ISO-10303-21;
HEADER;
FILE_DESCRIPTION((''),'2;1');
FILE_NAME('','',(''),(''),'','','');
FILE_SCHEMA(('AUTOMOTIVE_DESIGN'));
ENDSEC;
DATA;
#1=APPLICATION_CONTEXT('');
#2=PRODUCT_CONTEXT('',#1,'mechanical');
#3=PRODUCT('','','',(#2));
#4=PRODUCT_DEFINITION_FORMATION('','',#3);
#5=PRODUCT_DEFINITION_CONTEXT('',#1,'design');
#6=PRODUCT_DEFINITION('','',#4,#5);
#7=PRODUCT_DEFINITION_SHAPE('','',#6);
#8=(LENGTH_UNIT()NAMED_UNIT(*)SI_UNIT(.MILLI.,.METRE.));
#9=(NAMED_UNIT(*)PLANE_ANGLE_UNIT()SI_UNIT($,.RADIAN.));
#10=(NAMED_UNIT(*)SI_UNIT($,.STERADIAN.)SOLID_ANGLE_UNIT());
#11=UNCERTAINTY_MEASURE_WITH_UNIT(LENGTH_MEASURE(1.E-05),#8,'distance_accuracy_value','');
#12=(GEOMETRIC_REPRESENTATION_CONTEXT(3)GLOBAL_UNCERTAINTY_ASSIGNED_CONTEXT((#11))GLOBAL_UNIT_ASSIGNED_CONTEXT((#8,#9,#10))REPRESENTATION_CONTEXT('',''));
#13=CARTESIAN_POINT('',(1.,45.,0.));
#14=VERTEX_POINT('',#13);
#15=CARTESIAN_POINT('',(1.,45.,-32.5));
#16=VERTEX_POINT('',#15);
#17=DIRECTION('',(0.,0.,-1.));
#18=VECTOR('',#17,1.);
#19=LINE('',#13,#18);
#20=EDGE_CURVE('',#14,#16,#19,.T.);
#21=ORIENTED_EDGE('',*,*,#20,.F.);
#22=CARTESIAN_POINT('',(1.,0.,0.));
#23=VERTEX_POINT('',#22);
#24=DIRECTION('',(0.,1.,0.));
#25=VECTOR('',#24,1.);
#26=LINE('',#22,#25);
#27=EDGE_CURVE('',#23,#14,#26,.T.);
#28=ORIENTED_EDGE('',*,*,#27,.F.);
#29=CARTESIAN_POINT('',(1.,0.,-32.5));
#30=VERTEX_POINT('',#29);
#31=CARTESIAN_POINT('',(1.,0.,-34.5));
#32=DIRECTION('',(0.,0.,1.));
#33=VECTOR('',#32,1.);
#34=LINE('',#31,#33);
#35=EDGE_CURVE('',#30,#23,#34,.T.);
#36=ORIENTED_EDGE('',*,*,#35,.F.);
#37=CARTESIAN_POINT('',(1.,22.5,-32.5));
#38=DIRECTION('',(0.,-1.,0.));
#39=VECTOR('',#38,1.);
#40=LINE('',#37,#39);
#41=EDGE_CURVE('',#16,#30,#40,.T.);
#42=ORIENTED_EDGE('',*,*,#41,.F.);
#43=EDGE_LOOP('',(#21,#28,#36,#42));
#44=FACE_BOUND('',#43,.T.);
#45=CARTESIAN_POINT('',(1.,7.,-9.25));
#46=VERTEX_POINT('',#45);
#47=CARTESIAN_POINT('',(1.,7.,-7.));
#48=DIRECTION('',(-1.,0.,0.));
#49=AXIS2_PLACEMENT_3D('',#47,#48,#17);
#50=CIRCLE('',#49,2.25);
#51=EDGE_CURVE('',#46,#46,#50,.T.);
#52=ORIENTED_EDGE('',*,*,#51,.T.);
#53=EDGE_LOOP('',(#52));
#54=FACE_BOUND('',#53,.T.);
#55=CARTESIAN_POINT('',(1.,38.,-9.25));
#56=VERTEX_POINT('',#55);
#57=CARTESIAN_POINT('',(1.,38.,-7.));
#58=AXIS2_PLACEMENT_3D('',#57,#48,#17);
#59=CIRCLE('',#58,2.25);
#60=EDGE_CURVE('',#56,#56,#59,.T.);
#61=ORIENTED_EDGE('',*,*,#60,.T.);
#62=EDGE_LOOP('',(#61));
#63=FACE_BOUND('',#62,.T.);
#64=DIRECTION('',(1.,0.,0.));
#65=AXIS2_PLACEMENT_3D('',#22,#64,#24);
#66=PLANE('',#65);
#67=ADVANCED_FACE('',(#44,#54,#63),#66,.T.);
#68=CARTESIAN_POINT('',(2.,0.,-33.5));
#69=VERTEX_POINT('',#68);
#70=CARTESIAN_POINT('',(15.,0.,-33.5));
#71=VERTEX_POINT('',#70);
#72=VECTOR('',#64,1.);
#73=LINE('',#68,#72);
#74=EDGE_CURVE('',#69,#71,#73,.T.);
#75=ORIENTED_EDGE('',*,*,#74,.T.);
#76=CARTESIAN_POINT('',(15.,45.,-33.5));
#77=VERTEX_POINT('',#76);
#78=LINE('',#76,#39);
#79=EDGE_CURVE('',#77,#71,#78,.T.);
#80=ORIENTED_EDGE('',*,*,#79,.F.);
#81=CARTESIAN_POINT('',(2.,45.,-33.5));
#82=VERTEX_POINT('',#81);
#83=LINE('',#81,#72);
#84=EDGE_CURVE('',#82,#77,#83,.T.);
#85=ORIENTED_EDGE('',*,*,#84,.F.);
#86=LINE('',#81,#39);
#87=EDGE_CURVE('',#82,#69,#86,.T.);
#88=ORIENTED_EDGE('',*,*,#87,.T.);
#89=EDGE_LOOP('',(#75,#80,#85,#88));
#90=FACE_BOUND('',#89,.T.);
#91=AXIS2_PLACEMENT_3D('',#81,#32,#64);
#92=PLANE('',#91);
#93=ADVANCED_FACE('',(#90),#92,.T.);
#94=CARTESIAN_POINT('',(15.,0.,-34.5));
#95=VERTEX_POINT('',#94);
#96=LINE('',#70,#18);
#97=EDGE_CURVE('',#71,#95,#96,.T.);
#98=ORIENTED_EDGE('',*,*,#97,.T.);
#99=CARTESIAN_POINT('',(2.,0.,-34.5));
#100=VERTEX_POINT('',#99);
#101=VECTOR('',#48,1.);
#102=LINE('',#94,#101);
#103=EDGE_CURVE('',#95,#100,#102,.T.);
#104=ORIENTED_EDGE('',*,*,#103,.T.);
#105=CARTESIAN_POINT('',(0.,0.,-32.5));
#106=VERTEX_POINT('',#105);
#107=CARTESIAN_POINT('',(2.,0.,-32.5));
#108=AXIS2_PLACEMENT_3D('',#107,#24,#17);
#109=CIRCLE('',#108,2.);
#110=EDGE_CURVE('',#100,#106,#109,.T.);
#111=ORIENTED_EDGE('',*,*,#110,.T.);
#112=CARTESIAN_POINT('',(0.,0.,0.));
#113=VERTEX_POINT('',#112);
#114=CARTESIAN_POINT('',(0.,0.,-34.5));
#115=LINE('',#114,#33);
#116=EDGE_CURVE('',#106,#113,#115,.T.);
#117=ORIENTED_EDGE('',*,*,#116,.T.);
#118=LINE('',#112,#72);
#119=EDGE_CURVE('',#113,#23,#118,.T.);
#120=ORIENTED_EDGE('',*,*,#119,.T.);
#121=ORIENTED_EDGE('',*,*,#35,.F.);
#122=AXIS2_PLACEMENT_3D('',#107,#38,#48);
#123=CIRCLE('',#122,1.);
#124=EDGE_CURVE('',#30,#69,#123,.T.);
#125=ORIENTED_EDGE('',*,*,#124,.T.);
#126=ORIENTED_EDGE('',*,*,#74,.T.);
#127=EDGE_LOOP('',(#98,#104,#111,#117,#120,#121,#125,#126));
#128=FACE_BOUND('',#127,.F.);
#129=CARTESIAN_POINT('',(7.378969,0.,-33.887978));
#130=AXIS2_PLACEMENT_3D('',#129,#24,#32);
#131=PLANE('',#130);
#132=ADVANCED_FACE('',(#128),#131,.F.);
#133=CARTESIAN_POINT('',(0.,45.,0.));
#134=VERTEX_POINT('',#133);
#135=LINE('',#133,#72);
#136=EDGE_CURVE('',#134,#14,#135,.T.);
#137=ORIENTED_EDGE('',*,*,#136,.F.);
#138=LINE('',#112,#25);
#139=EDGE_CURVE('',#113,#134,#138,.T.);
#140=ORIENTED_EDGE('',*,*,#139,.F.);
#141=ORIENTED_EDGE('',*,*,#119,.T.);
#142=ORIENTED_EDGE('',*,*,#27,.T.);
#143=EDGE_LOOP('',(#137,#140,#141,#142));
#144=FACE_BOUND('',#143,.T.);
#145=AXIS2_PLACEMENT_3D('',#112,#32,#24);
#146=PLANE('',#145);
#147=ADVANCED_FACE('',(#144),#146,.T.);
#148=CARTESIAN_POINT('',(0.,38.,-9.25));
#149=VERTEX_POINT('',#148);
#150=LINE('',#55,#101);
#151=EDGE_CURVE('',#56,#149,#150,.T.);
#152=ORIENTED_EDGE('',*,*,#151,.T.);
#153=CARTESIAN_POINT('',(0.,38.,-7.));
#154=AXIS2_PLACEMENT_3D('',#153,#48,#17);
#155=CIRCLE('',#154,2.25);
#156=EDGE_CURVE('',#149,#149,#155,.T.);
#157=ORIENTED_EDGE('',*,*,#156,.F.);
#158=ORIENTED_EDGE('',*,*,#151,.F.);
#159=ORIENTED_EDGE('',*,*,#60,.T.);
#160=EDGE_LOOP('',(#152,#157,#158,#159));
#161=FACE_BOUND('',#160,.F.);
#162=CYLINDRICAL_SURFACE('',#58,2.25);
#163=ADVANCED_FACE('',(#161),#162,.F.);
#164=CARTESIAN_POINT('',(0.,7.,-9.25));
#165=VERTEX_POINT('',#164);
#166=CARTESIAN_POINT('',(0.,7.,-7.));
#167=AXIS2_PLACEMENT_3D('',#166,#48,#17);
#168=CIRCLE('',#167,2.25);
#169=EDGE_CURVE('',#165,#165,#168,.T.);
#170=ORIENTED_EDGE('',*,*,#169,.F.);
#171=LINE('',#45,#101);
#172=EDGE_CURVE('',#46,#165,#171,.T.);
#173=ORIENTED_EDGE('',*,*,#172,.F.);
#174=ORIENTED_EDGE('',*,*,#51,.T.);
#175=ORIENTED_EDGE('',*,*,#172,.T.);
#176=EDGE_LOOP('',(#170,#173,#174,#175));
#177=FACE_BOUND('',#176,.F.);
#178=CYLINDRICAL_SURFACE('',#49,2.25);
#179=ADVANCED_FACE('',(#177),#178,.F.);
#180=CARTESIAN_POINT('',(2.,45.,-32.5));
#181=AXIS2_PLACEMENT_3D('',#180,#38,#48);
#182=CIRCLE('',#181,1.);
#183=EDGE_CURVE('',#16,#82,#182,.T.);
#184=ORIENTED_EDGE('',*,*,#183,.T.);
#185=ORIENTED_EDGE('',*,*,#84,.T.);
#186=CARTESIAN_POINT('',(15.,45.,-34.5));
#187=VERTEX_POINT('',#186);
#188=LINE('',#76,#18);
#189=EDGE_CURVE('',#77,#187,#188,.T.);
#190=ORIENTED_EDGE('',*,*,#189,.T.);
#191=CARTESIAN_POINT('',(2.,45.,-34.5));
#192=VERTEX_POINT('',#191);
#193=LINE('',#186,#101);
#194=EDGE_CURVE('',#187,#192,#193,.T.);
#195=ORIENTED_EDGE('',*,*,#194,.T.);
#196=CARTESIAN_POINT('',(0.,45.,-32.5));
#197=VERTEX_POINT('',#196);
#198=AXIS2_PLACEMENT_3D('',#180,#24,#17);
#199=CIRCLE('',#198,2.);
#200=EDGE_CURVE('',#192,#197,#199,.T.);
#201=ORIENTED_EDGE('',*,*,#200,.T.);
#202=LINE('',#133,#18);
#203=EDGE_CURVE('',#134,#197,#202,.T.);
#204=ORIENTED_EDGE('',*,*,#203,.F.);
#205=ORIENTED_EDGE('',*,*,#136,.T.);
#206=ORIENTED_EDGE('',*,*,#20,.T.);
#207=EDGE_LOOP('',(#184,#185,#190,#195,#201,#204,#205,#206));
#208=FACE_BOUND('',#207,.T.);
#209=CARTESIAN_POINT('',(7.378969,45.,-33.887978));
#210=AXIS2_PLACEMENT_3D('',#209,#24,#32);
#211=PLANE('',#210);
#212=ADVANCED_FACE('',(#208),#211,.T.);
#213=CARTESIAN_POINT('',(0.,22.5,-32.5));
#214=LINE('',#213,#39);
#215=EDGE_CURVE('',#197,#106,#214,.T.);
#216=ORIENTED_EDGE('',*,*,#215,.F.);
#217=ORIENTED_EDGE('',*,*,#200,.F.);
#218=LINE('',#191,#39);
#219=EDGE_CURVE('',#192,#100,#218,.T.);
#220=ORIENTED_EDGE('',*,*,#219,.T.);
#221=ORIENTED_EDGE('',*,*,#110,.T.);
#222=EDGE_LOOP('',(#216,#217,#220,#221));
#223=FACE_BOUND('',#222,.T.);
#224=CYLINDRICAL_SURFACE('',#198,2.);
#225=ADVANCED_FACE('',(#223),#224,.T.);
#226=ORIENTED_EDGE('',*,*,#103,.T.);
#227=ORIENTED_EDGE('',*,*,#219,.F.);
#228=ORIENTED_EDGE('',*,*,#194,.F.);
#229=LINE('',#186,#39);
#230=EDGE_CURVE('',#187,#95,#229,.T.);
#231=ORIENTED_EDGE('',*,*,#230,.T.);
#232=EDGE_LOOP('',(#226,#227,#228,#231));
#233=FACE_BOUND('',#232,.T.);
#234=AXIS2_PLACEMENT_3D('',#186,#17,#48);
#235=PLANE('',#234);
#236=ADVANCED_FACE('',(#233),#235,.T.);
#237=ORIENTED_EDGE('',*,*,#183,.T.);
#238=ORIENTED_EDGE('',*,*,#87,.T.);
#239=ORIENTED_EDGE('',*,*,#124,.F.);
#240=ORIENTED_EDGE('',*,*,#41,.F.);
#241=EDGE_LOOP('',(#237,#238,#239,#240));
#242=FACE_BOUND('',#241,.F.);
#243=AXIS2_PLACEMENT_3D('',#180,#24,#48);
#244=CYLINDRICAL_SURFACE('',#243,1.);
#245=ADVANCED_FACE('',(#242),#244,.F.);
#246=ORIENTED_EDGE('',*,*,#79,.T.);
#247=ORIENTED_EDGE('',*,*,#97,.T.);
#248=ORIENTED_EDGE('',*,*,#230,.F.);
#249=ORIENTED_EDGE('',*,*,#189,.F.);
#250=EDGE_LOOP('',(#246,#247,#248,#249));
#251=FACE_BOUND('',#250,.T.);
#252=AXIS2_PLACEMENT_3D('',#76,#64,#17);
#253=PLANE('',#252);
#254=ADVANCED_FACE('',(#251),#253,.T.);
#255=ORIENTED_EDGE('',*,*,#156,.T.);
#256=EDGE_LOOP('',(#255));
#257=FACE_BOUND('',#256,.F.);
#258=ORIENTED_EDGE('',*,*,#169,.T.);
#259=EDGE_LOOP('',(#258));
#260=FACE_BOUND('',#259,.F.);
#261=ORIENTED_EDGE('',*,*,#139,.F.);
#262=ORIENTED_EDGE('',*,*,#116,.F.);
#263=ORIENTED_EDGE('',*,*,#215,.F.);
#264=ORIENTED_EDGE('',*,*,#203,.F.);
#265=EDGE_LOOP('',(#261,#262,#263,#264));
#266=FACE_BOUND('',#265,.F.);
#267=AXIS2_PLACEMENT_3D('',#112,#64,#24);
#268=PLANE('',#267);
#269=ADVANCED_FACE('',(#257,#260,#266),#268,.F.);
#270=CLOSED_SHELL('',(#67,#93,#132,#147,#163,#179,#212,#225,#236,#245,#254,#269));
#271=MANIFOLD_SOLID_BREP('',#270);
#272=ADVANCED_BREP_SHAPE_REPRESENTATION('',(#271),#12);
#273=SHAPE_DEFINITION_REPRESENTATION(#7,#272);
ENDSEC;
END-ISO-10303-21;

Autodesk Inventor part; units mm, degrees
ref_plane "YZ Plane" through (0, 0, 0) normal (1, 0, 0) x (0, 1, 0)
ref_plane "XZ Plane" through (0, 0, 0) normal (0, 1, 0) x (-1, 0, 0)
ref_plane "XY Plane" through (0, 0, 0) normal (0, 0, 1) x (1, 0, 0)
sketch "Sketch1" plane through (0, 0, 0) normal (1, 0, 0) x (0, 1, 0)
  line L0 (0, 0) -> (45, 0)
  line L1 (45, 0) -> (45, -34.5)
  line L2 (45, -34.5) -> (0, -34.5)
  line L3 (0, -34.5) -> (0, 0)
  dimension "d0" = 45
  dimension "d1" = 34.5
extrude "Plate1" add sketch "Sketch1" along normal blind 1
sketch "Sketch2" plane through (0, 45, -33.5) normal (0, 0, -1) x (-1, 0, 0)
  line L0 (0, -45) -> (0, 0)
  line L1 (0, 0) -> (-15, 0)
  line L2 (-15, 0) -> (-15, -45)
  line L3 (-15, -45) -> (0, -45)
edge flange "Flange1" height 15 angle 90 thickness 1 bend radius 1 thickness toward (0, 0, -1) relief tear relief width 1 relief depth 0.5 edges at (1, 22.5, -34.5) wall of the first edge with corners at (0, 0, -33.5) (0, 45, -33.5) (15, 45, -33.5) (15, 0, -33.5)
bend "Bend1"
corner "Corner1"
sketch "Sketch3" plane through (1, 0, 0) normal (1, 0, 0) x (0, 0, -1)
  line L0 (0, 45) -> (32.5, 45) projected
  line L1 (0, 0) -> (0, 45) projected
  line L2 (32.5, 0) -> (0, 0) projected
  point P0 (7, 38)
  point P1 (7, 7)
  dimension "d13" = 7
  dimension "d14" = 7
  dimension "d15" = 7
hole "Hole1" at (1, 38, -7) at (1, 7, -7) direction (-1, 0, 0) diameter 4.5 end through all
equation "\"d15\" = d13"
equation "\"d21\" = Thickness"
equation "\"d2\" = Thickness"
equation "\"d3\" = BendReliefWidth"
equation "\"d4\" = BendReliefDepth"
equation "\"d5\" = MinimumRemnant"
equation "\"d6\" = TransitionRadius"
equation "\"d9\" = BendRadius"
equation "\"d10\" = CornerReliefSize"
equation "\"d11\" = GapSize"
equation "\"d12\" = JacobiRadiusSize"
equation "\"BendRadius\" = Thickness"
equation "\"BendReliefWidth\" = Thickness"
equation "\"BendReliefDepth\" = 0.5 * Thickness"
equation "\"CornerReliefSize\" = 4 * Thickness"
equation "\"MinimumRemnant\" = 2 * Thickness"
equation "\"TransitionRadius\" = BendRadius"
equation "\"JacobiRadiusSize\" = BendRadius"
equation "\"GapSize\" = Thickness"
equation "\"Thickness\" = 1"
properties part number "Plate A connector box-iv stand" material "Steel, Carbon"
